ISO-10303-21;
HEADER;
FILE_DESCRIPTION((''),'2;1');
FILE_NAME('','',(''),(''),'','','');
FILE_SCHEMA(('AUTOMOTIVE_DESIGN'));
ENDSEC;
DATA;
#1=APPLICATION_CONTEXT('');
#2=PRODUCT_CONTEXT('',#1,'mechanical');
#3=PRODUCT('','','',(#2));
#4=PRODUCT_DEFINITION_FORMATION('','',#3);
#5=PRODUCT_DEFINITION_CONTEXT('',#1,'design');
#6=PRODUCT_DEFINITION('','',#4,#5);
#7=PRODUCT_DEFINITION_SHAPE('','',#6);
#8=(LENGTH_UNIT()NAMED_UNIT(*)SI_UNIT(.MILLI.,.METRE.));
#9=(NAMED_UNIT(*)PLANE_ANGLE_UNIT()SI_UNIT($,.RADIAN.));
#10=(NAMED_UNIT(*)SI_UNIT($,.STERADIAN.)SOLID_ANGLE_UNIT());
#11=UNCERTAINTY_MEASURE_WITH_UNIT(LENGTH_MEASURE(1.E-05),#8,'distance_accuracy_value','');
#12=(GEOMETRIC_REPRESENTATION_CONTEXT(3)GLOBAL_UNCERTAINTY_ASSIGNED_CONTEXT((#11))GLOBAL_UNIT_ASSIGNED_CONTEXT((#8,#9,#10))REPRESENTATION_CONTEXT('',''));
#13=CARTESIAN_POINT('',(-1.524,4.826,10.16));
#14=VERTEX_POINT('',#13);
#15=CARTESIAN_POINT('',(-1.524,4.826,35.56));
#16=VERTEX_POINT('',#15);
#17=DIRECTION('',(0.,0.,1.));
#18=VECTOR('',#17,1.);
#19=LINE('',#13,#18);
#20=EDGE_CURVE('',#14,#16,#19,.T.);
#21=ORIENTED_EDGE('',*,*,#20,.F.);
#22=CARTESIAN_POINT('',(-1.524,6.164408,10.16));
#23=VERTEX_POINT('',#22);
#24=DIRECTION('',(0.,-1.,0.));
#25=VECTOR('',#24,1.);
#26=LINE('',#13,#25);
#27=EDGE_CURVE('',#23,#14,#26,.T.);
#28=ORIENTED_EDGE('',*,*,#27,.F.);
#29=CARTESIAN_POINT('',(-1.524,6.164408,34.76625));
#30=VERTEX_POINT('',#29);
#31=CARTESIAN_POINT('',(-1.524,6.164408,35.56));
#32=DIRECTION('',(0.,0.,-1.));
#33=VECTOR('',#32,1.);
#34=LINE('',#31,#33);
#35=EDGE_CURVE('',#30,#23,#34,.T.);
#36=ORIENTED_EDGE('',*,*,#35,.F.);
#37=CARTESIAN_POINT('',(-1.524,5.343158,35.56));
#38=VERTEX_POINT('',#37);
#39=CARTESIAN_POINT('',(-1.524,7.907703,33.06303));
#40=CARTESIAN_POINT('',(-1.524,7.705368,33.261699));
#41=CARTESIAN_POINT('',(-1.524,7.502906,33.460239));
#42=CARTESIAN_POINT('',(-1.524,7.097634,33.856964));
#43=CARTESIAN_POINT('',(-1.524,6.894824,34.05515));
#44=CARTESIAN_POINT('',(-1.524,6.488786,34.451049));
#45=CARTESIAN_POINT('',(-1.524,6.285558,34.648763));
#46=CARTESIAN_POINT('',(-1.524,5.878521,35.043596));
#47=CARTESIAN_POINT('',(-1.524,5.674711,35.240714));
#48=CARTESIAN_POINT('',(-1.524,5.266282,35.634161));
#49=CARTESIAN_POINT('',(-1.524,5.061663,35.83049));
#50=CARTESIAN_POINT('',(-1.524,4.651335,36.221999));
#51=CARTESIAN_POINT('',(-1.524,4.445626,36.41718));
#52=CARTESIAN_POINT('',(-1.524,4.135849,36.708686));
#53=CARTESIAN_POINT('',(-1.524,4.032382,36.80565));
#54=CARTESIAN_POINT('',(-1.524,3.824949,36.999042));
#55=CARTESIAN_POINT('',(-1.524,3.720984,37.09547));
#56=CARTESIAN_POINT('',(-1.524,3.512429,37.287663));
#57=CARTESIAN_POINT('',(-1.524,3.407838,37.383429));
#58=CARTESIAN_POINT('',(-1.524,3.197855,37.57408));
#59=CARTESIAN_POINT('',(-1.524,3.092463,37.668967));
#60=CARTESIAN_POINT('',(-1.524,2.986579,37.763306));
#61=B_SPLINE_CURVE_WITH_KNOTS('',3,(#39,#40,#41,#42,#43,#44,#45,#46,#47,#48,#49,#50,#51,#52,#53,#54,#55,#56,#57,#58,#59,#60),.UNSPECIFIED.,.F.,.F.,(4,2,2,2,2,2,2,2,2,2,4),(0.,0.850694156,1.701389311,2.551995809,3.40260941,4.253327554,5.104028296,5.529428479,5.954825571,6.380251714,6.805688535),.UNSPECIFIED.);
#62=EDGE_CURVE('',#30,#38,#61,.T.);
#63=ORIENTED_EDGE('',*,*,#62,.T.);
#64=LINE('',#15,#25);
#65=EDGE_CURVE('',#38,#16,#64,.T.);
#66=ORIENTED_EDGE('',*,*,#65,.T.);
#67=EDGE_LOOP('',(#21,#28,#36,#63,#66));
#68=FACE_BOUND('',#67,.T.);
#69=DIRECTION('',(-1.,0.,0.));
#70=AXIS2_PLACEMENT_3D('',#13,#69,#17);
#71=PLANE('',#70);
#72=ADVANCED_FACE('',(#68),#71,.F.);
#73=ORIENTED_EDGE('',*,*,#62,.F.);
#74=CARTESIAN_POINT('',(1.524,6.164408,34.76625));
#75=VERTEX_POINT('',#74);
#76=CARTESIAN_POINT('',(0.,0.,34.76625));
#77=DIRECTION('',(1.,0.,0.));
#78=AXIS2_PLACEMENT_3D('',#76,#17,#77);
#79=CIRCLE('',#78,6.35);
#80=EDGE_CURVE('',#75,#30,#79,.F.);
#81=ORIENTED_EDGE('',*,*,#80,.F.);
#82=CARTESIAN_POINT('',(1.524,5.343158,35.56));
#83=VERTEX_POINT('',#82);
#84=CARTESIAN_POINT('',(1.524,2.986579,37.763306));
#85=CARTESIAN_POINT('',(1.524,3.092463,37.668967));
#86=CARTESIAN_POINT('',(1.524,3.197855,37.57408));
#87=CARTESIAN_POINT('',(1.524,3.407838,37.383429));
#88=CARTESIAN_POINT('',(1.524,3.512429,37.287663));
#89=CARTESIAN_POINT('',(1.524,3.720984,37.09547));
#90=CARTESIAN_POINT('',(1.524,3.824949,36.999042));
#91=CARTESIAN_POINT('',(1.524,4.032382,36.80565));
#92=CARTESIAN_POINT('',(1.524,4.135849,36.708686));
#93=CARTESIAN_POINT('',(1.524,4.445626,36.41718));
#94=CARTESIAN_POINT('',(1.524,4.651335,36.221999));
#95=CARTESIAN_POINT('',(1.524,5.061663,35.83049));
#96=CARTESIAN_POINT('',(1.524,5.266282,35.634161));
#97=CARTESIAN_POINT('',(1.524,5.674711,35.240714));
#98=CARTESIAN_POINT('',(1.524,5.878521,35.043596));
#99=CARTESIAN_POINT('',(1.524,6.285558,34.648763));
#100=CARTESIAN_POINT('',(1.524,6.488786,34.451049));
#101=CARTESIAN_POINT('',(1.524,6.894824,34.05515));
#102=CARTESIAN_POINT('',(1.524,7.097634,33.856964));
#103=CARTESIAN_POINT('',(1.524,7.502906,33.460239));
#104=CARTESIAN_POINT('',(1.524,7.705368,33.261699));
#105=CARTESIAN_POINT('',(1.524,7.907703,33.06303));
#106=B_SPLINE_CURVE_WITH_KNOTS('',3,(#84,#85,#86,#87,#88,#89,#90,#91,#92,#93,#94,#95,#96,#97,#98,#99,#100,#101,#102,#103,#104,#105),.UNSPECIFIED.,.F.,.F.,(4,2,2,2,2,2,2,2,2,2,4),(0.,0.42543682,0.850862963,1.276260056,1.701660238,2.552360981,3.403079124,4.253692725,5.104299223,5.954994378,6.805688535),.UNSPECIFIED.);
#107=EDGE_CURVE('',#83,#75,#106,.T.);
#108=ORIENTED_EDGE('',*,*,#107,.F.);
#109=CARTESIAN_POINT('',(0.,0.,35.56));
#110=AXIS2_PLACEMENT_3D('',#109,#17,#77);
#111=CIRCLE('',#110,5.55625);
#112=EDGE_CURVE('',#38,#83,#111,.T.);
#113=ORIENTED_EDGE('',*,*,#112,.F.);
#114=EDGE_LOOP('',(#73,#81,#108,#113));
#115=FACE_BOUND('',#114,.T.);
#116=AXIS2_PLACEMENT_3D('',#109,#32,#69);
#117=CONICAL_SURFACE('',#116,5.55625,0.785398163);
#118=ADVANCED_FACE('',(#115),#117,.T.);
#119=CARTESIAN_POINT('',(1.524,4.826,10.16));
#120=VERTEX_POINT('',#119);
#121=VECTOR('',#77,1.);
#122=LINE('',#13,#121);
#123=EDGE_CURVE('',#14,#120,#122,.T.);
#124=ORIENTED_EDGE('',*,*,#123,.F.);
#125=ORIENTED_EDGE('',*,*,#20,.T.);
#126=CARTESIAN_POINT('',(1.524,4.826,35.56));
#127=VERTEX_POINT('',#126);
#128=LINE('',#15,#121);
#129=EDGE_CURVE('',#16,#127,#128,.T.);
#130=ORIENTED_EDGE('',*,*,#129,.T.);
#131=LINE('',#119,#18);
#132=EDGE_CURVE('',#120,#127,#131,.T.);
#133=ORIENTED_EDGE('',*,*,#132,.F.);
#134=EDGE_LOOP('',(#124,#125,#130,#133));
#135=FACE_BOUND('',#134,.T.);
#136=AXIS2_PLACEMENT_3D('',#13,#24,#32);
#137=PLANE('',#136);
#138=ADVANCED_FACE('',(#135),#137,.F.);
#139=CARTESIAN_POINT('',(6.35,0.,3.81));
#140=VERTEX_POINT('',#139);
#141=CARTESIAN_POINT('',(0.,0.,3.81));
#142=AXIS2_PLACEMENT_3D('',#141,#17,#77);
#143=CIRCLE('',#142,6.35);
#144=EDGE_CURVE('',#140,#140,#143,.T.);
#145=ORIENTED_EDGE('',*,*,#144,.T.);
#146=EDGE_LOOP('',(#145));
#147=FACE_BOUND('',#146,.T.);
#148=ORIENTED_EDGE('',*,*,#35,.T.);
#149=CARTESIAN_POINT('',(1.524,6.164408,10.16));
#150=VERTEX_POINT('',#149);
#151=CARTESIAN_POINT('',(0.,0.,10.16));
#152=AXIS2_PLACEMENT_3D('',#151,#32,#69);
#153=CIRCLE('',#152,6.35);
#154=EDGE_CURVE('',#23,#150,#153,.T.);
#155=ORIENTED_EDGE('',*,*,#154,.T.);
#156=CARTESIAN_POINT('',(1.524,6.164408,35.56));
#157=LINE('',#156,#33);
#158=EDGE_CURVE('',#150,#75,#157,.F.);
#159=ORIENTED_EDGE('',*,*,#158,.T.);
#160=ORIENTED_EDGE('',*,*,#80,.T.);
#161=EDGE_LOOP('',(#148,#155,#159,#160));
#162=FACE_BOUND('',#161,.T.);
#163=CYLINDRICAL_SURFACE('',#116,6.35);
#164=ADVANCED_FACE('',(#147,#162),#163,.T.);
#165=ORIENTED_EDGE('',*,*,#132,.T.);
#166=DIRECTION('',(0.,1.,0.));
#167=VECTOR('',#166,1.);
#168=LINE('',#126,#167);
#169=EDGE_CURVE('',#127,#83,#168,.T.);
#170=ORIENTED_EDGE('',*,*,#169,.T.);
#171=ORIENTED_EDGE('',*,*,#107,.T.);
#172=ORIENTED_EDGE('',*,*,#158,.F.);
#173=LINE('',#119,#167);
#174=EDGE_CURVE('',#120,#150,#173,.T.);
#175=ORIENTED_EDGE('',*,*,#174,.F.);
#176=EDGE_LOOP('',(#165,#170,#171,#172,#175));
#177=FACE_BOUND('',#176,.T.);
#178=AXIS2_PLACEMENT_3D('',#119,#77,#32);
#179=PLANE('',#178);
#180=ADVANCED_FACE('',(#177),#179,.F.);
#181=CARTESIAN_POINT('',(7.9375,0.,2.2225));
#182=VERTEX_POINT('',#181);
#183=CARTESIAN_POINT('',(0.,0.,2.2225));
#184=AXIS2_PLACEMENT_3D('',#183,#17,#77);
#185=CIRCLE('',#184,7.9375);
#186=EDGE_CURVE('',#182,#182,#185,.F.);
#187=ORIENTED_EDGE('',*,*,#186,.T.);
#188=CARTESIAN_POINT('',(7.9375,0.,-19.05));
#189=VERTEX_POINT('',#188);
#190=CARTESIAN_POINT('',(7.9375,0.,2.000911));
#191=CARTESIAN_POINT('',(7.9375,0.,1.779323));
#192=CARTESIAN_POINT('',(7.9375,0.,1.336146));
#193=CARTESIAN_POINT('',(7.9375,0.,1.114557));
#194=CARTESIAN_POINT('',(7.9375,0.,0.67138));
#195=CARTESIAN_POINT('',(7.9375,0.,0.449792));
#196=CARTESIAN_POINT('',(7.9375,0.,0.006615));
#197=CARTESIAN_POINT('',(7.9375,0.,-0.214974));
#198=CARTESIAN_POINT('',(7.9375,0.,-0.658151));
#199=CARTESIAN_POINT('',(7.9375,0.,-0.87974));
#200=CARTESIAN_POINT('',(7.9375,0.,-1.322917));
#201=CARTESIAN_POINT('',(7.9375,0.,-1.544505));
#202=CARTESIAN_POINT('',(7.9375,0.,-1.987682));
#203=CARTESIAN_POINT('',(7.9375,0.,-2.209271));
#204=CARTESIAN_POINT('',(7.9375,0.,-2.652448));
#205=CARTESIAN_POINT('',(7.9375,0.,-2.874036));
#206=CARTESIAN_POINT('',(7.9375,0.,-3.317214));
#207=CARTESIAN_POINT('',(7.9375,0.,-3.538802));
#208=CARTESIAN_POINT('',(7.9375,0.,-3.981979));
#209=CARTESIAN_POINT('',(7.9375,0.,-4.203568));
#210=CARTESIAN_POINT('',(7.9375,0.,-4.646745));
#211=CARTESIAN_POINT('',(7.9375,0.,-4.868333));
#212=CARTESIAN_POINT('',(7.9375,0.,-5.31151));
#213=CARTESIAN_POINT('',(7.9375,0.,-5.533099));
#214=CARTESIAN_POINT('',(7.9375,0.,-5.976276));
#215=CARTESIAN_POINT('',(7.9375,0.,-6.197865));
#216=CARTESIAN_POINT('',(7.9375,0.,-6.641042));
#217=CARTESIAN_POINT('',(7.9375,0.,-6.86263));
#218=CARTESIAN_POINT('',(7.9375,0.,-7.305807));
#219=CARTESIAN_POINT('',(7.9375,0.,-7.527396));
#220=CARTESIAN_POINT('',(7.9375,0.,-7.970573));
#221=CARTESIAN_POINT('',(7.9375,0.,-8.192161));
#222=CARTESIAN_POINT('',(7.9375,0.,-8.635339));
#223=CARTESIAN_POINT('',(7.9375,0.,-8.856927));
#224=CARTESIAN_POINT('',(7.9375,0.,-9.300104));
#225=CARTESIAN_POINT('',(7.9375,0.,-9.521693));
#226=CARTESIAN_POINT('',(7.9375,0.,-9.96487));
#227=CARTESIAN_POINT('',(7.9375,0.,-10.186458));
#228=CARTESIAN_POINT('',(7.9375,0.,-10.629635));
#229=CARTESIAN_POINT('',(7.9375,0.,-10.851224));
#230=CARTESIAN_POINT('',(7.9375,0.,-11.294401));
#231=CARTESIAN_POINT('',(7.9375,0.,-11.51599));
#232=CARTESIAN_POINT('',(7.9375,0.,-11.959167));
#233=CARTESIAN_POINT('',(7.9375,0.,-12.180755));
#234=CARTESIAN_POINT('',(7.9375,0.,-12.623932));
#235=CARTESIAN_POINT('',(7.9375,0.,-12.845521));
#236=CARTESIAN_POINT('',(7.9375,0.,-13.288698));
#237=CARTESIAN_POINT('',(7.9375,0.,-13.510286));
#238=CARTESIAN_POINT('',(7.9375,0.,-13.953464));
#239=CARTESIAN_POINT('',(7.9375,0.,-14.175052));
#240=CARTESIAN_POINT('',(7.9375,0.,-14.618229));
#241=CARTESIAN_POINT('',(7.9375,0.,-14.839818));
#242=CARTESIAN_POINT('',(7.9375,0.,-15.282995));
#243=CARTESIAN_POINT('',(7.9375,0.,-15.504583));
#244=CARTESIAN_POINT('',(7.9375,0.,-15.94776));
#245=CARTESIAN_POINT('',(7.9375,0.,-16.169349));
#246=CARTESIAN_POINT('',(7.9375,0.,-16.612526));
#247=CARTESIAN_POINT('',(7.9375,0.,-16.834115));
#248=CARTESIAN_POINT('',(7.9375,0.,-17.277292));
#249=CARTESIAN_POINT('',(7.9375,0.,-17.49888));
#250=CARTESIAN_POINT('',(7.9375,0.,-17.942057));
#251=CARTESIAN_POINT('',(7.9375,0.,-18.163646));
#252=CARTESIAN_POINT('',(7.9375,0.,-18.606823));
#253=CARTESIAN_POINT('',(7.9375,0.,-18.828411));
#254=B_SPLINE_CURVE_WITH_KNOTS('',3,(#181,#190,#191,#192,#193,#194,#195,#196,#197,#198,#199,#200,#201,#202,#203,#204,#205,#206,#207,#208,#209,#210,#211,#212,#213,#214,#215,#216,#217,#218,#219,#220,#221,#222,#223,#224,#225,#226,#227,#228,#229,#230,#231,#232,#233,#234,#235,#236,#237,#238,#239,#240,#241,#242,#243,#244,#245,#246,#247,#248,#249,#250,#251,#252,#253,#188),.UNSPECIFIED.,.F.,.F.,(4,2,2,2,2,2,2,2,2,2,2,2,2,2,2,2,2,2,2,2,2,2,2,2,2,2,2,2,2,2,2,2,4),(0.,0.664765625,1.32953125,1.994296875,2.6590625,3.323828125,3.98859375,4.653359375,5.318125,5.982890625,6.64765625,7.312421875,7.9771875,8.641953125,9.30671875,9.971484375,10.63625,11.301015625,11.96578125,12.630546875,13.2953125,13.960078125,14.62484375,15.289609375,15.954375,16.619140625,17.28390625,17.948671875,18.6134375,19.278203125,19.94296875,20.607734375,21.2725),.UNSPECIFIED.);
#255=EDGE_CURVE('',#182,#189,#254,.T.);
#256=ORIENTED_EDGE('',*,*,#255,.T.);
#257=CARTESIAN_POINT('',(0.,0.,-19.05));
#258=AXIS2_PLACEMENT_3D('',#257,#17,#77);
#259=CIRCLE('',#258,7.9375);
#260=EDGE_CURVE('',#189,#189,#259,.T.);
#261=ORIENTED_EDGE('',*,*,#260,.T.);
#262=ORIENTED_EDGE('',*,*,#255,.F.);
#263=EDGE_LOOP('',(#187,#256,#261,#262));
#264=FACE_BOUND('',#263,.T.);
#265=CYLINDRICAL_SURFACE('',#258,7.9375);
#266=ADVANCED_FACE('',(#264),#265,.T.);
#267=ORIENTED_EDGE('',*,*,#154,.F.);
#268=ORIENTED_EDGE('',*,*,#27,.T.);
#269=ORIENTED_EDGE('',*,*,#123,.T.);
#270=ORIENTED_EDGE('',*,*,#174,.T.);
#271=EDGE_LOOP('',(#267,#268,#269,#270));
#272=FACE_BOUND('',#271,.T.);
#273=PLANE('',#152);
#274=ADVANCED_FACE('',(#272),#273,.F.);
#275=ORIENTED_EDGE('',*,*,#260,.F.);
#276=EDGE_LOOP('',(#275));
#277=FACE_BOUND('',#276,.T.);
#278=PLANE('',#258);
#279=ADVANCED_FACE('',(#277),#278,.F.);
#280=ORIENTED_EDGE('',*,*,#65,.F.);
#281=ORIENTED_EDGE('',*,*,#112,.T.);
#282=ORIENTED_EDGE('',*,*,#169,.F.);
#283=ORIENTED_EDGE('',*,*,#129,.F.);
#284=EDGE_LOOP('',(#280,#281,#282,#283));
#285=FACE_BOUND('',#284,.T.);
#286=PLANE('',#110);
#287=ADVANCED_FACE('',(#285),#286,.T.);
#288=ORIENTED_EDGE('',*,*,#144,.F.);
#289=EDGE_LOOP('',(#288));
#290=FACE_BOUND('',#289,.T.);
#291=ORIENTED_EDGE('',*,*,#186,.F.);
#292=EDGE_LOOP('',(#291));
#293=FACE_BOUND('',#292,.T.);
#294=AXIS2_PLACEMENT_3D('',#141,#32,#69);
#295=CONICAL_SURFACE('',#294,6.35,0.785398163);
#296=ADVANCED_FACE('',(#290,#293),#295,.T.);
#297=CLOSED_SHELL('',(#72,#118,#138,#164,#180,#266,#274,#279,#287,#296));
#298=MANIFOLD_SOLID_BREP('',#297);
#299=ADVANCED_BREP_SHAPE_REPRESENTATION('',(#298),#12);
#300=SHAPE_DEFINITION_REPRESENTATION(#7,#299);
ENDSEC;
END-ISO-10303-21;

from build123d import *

# Parameters (mm, degrees)
BOSS_EXTRUDE1_DEPTH      = 3.81
BOSS_EXTRUDE1_DEPTH_BACK = 19.05
SKETCH1_R                = 7.9375
SKETCH2_R                = 6.35
BOSS_EXTRUDE2_DEPTH      = 31.75
CHAMFER1_SIZE            = 1.5875
CHAMFER2_SIZE            = 0.79375
SKETCH3_W                = 3.048
SKETCH3_H                = 1.524
CUT_EXTRUDE1_DEPTH       = 25.4


with BuildPart() as part:
    # Sketch1 → Boss-Extrude1 (new, two sides: drawn at the far end of the back side and taken through both)
    with BuildSketch(Plane.XY.offset(-BOSS_EXTRUDE1_DEPTH_BACK)):
        Circle(SKETCH1_R)
    extrude(amount=BOSS_EXTRUDE1_DEPTH + BOSS_EXTRUDE1_DEPTH_BACK)

    # Sketch2 → Boss-Extrude2 (add)
    with BuildSketch(Plane.XY.offset(3.81)):
        Circle(SKETCH2_R)
    extrude(amount=BOSS_EXTRUDE2_DEPTH)

    # Chamfer1
    chamfer1_edges = [part.edges().sort_by_distance(p)[0] for p in [
        (-7.9375, 0, 3.81),
    ]]
    chamfer(chamfer1_edges, length=CHAMFER1_SIZE - 0.0001)  # a hair under: the kernel refuses the full size

    # Chamfer2
    chamfer2_edges = [part.edges().sort_by_distance(p)[0] for p in [
        (-6.35, 0, 35.56),
    ]]
    chamfer(chamfer2_edges, length=CHAMFER2_SIZE)

    # Sketch3 → Cut-Extrude1 (cut)
    with BuildSketch(Plane.XY.offset(35.56)):
        with Locations((0, 5.588)):
            Rectangle(SKETCH3_W, SKETCH3_H)
    extrude(amount=-CUT_EXTRUDE1_DEPTH, mode=Mode.SUBTRACT)


solid = part.part
